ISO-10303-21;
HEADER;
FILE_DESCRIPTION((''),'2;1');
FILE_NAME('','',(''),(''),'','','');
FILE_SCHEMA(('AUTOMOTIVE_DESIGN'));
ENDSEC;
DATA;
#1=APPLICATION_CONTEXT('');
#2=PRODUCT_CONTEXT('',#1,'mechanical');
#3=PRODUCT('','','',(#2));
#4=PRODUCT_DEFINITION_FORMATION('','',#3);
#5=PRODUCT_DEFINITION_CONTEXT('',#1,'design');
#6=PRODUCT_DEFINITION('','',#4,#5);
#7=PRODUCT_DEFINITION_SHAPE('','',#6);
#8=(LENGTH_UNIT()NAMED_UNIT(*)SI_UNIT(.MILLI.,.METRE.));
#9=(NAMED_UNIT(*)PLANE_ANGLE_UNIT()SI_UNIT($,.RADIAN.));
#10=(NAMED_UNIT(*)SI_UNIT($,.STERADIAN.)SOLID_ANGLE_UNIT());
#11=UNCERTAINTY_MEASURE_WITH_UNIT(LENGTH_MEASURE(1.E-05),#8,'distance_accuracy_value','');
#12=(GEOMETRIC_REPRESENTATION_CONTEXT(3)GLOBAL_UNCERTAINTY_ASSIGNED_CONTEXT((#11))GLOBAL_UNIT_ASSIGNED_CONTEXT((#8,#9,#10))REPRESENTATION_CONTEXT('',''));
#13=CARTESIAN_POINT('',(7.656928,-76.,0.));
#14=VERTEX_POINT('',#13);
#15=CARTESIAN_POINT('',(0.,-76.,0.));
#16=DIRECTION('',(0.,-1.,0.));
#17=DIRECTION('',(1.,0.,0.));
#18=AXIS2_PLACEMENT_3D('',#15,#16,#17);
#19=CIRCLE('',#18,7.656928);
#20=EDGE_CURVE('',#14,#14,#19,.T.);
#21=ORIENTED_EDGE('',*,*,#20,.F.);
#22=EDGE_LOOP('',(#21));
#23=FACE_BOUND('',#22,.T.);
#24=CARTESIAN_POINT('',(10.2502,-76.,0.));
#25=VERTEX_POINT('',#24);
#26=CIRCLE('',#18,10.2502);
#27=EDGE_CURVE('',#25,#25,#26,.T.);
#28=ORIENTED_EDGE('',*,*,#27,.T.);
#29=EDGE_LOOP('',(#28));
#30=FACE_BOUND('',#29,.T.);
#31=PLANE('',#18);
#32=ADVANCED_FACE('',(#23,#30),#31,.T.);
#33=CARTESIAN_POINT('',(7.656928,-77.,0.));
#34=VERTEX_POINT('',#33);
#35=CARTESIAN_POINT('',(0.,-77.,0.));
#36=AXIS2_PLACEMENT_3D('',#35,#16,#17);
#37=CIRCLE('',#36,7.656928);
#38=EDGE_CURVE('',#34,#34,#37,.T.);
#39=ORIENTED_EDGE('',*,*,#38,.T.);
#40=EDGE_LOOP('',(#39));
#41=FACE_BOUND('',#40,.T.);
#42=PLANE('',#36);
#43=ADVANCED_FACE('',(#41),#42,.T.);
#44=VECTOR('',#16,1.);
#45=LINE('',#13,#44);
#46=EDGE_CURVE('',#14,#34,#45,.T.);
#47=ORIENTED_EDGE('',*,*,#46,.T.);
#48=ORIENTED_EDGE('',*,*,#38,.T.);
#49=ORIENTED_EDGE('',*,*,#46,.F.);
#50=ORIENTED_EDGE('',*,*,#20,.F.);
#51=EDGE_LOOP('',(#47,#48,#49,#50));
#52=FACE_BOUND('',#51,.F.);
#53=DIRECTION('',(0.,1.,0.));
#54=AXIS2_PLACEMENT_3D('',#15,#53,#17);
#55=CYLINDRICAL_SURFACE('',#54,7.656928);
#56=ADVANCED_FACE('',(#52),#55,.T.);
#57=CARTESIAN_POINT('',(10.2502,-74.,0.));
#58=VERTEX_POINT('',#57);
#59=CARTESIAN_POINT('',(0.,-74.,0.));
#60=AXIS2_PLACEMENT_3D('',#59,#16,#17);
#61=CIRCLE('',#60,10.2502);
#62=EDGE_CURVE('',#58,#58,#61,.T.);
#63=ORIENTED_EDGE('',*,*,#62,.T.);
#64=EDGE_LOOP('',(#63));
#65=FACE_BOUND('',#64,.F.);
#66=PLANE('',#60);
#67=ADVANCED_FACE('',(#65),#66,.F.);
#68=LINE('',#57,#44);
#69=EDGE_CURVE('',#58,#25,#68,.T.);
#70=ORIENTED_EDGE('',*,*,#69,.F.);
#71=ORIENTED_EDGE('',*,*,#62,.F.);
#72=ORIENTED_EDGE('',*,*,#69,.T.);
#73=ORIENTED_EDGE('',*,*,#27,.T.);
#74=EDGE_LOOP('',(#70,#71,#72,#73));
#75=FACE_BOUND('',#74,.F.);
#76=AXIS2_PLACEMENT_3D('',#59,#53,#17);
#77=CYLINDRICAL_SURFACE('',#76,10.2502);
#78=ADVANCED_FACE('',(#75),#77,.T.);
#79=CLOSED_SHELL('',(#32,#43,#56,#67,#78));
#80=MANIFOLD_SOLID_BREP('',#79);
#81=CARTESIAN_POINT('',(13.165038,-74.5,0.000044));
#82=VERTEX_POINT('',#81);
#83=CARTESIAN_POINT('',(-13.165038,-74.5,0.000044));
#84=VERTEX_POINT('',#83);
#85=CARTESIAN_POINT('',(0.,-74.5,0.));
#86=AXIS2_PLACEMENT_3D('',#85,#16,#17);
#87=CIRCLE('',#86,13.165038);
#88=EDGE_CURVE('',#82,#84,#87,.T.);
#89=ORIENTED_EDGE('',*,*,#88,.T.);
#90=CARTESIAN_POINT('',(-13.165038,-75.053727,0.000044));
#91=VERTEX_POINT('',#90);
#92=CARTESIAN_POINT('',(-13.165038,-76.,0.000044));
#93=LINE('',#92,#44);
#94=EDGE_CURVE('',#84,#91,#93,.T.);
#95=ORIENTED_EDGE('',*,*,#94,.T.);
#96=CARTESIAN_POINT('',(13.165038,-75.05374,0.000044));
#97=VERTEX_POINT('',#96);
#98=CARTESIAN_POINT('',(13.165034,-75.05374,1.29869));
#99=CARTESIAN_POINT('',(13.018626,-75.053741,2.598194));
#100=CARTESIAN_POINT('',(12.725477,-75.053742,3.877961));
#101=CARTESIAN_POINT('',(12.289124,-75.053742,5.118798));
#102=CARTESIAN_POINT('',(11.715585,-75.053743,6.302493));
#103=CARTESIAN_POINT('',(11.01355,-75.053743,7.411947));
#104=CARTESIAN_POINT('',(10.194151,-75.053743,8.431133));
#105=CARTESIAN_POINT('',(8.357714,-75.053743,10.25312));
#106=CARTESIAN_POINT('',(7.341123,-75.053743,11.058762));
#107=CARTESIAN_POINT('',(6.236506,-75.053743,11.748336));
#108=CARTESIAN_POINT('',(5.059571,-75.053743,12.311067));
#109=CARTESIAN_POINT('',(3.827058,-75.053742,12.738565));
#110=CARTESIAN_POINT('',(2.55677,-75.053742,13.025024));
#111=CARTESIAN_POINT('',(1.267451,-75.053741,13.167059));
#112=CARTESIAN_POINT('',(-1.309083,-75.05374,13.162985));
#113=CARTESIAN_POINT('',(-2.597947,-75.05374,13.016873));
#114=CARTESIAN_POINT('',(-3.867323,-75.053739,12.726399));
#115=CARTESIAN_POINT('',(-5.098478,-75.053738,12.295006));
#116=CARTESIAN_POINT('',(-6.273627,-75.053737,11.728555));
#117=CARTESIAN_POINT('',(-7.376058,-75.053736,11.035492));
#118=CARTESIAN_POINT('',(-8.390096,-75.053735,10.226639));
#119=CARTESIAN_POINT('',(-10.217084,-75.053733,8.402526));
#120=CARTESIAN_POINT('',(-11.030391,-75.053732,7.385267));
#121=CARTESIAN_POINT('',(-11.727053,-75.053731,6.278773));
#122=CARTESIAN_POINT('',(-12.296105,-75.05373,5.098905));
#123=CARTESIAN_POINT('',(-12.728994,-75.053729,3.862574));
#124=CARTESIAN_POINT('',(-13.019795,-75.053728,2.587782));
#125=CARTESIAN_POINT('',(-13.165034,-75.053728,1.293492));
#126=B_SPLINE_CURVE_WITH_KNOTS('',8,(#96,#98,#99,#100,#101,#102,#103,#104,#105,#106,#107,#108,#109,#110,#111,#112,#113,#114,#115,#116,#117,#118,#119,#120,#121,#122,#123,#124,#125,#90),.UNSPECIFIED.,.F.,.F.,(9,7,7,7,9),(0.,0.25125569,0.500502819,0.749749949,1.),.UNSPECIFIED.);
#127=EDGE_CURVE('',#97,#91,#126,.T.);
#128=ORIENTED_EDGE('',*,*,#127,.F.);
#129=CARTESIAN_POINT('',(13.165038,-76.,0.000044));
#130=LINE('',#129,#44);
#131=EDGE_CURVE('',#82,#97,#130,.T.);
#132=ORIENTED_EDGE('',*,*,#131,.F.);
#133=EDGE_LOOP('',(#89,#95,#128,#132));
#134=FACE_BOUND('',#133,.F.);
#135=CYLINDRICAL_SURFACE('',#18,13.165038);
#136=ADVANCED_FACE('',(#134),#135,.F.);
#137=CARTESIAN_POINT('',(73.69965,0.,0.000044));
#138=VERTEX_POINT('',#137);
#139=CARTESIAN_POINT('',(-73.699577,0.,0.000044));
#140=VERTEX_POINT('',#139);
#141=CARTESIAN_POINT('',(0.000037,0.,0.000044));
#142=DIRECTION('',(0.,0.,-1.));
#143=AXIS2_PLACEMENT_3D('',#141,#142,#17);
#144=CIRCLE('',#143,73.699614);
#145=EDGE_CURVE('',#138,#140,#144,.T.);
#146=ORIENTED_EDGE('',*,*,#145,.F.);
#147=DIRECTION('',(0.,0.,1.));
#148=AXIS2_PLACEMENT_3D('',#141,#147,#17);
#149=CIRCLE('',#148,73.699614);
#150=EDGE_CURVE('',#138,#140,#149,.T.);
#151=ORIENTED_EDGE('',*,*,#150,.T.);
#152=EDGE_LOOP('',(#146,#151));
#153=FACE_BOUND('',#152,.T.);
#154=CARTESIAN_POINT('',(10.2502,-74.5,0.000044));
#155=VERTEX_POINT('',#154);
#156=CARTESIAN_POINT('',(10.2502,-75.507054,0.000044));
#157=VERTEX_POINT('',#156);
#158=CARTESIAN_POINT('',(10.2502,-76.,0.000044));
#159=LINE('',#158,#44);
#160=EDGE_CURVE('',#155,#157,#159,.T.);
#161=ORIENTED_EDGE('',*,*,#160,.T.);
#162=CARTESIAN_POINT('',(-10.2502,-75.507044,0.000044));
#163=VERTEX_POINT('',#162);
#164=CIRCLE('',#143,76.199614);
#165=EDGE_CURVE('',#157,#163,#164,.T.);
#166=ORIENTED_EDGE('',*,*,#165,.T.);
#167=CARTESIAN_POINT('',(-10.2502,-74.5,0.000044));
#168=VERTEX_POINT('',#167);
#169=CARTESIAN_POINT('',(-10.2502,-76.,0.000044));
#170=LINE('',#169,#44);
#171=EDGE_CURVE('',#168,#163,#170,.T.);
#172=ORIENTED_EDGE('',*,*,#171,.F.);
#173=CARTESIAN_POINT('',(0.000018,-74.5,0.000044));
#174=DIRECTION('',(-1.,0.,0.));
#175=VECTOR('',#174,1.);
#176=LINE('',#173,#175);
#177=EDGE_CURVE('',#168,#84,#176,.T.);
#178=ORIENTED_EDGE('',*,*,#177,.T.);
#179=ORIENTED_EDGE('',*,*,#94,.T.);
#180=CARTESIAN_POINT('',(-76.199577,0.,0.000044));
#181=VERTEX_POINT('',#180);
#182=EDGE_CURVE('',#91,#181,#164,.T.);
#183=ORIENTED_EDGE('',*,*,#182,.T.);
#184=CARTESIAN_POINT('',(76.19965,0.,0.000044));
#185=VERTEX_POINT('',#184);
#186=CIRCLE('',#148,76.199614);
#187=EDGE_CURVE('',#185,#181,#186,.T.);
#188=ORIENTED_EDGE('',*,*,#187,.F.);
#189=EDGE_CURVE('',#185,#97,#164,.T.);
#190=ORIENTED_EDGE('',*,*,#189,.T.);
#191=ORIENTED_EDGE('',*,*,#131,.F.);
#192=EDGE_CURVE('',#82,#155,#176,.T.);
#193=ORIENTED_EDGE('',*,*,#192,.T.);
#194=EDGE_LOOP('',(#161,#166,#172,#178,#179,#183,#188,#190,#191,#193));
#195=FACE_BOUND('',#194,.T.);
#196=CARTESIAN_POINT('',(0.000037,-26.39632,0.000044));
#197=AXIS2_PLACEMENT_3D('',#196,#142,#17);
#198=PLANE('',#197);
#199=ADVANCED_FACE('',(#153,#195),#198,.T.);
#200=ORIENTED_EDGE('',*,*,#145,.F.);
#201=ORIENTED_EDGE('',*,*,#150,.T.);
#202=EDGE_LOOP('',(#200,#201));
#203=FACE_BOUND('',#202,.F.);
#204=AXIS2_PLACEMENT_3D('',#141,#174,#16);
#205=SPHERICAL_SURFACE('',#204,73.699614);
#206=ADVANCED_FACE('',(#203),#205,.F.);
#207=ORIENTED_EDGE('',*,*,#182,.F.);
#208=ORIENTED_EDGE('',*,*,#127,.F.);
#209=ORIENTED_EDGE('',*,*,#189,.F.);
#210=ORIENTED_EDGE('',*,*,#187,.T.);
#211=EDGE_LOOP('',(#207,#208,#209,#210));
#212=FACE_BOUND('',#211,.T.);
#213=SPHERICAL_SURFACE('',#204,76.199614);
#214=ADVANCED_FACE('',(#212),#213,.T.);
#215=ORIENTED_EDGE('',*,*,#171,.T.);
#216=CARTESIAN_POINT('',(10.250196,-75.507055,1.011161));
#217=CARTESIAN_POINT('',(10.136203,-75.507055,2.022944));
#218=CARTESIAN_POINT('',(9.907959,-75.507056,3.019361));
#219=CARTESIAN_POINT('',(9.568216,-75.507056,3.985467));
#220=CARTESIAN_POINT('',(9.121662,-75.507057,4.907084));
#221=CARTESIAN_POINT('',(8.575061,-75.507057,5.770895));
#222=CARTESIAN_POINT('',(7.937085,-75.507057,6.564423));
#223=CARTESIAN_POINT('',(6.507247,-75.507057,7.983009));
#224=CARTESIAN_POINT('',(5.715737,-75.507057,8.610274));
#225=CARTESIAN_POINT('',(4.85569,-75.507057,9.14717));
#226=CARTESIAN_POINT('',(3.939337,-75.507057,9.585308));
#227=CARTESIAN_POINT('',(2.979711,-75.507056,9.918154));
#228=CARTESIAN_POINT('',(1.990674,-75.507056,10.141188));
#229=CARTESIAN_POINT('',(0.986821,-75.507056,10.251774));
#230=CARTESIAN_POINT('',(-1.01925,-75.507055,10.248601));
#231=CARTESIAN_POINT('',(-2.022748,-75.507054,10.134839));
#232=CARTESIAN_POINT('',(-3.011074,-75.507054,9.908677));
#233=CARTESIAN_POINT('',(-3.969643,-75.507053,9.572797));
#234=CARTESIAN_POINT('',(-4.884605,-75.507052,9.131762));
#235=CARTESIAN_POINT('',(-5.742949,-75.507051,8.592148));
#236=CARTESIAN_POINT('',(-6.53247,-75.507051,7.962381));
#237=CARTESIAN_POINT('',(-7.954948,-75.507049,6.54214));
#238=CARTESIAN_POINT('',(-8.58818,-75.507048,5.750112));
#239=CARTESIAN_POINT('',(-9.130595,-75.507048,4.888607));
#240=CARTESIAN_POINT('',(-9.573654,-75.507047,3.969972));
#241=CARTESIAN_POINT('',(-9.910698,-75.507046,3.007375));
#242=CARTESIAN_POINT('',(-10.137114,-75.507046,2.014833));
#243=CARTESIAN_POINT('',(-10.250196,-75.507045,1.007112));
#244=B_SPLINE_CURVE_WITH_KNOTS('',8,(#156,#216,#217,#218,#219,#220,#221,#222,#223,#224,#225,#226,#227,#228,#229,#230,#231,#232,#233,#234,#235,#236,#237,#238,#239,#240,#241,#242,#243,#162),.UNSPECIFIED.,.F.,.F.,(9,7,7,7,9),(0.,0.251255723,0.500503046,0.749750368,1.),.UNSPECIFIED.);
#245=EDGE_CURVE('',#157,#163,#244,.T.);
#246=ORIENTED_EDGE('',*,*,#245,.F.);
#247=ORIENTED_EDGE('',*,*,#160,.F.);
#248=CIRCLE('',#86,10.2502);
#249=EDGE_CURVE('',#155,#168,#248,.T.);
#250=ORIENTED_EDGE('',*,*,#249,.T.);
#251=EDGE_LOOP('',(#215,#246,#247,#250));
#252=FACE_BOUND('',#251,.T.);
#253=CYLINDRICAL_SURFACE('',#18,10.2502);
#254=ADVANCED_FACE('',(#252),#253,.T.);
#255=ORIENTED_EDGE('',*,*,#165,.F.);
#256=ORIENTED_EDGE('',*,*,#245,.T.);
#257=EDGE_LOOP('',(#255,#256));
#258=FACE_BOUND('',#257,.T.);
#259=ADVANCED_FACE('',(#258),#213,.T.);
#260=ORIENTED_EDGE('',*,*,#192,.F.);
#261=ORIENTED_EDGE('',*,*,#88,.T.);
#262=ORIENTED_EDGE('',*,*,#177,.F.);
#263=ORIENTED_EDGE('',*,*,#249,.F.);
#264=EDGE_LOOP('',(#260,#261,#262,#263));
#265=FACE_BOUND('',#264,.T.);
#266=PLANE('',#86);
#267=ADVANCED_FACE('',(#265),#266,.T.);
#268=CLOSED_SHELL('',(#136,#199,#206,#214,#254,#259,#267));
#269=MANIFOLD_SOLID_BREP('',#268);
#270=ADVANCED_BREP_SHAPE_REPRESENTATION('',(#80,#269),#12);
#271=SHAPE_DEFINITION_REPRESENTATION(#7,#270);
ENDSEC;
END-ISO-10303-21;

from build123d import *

# Parameters (mm, degrees)
F1_ANGLE_BACK = 90
F1_ANGLE      = 180
F2_T          = -2.5
F3_R          = 10.2502002621
F4_DEPTH      = 74
F5_R          = 10.2502002621
F6_DEPTH      = 2
F7_R          = 7.6569283782
F8_DEPTH      = 1
F9_R          = 13.1650380961
F9_R_2        = 10.2502002621
F10_DEPTH     = 1.5


# Not quite as in the source:
# - ends of sketch curves that miss each other by under 0.0002 mm in the source are joined


with BuildPart() as f1:
    # F0 (on Front) → F1 (revolve)
    with BuildSketch(Plane.XZ, mode=Mode.PRIVATE) as f1_sk:
        with BuildLine():
            ThreePointArc((76.1996501387, 4.35119e-05), (3.66272e-05, 76.1996570235), (-76.1995768844, 4.35119e-05))
            Line((-76.1995768844, 4.35119e-05), (76.1996501387, 4.35119e-05))
        make_face()
    revolve(f1_sk.sketch.rotate(Axis((8.50559e-05, 0, 4.35119e-05), (-1, 0, 0)), -F1_ANGLE_BACK), axis=Axis((8.50559e-05, 0, 4.35119e-05), (-1, 0, 0)), revolution_arc=F1_ANGLE)

    # F2
    f2_openings = [f1.faces().sort_by_distance(p)[0] for p in [
        (3.7e-05, 0, 4.4e-05),
    ]]
    offset(amount=F2_T, openings=f2_openings)

    # F9 (on face) → F10 (cut)
    with BuildSketch(Plane.XZ.offset(76)):
        Circle(F9_R)
        Circle(F9_R_2, mode=Mode.SUBTRACT)
    extrude(amount=-F10_DEPTH, mode=Mode.SUBTRACT)


with BuildPart() as f4:
    # F3 (on Front) → F4 (new body)
    with BuildSketch(Plane.XZ):
        Circle(F3_R)
    extrude(amount=F4_DEPTH)


with BuildPart() as f6:
    # F5 (on face) → F6 (new body)
    with BuildSketch(Plane.XZ.offset(74)):
        Circle(F5_R)
    extrude(amount=F6_DEPTH)

    # F7 (on face) → F8 (join)
    with BuildSketch(Plane.XZ.offset(76)):
        Circle(F7_R)
    extrude(amount=F8_DEPTH)


solid = Compound([f1.part, f6.part])
